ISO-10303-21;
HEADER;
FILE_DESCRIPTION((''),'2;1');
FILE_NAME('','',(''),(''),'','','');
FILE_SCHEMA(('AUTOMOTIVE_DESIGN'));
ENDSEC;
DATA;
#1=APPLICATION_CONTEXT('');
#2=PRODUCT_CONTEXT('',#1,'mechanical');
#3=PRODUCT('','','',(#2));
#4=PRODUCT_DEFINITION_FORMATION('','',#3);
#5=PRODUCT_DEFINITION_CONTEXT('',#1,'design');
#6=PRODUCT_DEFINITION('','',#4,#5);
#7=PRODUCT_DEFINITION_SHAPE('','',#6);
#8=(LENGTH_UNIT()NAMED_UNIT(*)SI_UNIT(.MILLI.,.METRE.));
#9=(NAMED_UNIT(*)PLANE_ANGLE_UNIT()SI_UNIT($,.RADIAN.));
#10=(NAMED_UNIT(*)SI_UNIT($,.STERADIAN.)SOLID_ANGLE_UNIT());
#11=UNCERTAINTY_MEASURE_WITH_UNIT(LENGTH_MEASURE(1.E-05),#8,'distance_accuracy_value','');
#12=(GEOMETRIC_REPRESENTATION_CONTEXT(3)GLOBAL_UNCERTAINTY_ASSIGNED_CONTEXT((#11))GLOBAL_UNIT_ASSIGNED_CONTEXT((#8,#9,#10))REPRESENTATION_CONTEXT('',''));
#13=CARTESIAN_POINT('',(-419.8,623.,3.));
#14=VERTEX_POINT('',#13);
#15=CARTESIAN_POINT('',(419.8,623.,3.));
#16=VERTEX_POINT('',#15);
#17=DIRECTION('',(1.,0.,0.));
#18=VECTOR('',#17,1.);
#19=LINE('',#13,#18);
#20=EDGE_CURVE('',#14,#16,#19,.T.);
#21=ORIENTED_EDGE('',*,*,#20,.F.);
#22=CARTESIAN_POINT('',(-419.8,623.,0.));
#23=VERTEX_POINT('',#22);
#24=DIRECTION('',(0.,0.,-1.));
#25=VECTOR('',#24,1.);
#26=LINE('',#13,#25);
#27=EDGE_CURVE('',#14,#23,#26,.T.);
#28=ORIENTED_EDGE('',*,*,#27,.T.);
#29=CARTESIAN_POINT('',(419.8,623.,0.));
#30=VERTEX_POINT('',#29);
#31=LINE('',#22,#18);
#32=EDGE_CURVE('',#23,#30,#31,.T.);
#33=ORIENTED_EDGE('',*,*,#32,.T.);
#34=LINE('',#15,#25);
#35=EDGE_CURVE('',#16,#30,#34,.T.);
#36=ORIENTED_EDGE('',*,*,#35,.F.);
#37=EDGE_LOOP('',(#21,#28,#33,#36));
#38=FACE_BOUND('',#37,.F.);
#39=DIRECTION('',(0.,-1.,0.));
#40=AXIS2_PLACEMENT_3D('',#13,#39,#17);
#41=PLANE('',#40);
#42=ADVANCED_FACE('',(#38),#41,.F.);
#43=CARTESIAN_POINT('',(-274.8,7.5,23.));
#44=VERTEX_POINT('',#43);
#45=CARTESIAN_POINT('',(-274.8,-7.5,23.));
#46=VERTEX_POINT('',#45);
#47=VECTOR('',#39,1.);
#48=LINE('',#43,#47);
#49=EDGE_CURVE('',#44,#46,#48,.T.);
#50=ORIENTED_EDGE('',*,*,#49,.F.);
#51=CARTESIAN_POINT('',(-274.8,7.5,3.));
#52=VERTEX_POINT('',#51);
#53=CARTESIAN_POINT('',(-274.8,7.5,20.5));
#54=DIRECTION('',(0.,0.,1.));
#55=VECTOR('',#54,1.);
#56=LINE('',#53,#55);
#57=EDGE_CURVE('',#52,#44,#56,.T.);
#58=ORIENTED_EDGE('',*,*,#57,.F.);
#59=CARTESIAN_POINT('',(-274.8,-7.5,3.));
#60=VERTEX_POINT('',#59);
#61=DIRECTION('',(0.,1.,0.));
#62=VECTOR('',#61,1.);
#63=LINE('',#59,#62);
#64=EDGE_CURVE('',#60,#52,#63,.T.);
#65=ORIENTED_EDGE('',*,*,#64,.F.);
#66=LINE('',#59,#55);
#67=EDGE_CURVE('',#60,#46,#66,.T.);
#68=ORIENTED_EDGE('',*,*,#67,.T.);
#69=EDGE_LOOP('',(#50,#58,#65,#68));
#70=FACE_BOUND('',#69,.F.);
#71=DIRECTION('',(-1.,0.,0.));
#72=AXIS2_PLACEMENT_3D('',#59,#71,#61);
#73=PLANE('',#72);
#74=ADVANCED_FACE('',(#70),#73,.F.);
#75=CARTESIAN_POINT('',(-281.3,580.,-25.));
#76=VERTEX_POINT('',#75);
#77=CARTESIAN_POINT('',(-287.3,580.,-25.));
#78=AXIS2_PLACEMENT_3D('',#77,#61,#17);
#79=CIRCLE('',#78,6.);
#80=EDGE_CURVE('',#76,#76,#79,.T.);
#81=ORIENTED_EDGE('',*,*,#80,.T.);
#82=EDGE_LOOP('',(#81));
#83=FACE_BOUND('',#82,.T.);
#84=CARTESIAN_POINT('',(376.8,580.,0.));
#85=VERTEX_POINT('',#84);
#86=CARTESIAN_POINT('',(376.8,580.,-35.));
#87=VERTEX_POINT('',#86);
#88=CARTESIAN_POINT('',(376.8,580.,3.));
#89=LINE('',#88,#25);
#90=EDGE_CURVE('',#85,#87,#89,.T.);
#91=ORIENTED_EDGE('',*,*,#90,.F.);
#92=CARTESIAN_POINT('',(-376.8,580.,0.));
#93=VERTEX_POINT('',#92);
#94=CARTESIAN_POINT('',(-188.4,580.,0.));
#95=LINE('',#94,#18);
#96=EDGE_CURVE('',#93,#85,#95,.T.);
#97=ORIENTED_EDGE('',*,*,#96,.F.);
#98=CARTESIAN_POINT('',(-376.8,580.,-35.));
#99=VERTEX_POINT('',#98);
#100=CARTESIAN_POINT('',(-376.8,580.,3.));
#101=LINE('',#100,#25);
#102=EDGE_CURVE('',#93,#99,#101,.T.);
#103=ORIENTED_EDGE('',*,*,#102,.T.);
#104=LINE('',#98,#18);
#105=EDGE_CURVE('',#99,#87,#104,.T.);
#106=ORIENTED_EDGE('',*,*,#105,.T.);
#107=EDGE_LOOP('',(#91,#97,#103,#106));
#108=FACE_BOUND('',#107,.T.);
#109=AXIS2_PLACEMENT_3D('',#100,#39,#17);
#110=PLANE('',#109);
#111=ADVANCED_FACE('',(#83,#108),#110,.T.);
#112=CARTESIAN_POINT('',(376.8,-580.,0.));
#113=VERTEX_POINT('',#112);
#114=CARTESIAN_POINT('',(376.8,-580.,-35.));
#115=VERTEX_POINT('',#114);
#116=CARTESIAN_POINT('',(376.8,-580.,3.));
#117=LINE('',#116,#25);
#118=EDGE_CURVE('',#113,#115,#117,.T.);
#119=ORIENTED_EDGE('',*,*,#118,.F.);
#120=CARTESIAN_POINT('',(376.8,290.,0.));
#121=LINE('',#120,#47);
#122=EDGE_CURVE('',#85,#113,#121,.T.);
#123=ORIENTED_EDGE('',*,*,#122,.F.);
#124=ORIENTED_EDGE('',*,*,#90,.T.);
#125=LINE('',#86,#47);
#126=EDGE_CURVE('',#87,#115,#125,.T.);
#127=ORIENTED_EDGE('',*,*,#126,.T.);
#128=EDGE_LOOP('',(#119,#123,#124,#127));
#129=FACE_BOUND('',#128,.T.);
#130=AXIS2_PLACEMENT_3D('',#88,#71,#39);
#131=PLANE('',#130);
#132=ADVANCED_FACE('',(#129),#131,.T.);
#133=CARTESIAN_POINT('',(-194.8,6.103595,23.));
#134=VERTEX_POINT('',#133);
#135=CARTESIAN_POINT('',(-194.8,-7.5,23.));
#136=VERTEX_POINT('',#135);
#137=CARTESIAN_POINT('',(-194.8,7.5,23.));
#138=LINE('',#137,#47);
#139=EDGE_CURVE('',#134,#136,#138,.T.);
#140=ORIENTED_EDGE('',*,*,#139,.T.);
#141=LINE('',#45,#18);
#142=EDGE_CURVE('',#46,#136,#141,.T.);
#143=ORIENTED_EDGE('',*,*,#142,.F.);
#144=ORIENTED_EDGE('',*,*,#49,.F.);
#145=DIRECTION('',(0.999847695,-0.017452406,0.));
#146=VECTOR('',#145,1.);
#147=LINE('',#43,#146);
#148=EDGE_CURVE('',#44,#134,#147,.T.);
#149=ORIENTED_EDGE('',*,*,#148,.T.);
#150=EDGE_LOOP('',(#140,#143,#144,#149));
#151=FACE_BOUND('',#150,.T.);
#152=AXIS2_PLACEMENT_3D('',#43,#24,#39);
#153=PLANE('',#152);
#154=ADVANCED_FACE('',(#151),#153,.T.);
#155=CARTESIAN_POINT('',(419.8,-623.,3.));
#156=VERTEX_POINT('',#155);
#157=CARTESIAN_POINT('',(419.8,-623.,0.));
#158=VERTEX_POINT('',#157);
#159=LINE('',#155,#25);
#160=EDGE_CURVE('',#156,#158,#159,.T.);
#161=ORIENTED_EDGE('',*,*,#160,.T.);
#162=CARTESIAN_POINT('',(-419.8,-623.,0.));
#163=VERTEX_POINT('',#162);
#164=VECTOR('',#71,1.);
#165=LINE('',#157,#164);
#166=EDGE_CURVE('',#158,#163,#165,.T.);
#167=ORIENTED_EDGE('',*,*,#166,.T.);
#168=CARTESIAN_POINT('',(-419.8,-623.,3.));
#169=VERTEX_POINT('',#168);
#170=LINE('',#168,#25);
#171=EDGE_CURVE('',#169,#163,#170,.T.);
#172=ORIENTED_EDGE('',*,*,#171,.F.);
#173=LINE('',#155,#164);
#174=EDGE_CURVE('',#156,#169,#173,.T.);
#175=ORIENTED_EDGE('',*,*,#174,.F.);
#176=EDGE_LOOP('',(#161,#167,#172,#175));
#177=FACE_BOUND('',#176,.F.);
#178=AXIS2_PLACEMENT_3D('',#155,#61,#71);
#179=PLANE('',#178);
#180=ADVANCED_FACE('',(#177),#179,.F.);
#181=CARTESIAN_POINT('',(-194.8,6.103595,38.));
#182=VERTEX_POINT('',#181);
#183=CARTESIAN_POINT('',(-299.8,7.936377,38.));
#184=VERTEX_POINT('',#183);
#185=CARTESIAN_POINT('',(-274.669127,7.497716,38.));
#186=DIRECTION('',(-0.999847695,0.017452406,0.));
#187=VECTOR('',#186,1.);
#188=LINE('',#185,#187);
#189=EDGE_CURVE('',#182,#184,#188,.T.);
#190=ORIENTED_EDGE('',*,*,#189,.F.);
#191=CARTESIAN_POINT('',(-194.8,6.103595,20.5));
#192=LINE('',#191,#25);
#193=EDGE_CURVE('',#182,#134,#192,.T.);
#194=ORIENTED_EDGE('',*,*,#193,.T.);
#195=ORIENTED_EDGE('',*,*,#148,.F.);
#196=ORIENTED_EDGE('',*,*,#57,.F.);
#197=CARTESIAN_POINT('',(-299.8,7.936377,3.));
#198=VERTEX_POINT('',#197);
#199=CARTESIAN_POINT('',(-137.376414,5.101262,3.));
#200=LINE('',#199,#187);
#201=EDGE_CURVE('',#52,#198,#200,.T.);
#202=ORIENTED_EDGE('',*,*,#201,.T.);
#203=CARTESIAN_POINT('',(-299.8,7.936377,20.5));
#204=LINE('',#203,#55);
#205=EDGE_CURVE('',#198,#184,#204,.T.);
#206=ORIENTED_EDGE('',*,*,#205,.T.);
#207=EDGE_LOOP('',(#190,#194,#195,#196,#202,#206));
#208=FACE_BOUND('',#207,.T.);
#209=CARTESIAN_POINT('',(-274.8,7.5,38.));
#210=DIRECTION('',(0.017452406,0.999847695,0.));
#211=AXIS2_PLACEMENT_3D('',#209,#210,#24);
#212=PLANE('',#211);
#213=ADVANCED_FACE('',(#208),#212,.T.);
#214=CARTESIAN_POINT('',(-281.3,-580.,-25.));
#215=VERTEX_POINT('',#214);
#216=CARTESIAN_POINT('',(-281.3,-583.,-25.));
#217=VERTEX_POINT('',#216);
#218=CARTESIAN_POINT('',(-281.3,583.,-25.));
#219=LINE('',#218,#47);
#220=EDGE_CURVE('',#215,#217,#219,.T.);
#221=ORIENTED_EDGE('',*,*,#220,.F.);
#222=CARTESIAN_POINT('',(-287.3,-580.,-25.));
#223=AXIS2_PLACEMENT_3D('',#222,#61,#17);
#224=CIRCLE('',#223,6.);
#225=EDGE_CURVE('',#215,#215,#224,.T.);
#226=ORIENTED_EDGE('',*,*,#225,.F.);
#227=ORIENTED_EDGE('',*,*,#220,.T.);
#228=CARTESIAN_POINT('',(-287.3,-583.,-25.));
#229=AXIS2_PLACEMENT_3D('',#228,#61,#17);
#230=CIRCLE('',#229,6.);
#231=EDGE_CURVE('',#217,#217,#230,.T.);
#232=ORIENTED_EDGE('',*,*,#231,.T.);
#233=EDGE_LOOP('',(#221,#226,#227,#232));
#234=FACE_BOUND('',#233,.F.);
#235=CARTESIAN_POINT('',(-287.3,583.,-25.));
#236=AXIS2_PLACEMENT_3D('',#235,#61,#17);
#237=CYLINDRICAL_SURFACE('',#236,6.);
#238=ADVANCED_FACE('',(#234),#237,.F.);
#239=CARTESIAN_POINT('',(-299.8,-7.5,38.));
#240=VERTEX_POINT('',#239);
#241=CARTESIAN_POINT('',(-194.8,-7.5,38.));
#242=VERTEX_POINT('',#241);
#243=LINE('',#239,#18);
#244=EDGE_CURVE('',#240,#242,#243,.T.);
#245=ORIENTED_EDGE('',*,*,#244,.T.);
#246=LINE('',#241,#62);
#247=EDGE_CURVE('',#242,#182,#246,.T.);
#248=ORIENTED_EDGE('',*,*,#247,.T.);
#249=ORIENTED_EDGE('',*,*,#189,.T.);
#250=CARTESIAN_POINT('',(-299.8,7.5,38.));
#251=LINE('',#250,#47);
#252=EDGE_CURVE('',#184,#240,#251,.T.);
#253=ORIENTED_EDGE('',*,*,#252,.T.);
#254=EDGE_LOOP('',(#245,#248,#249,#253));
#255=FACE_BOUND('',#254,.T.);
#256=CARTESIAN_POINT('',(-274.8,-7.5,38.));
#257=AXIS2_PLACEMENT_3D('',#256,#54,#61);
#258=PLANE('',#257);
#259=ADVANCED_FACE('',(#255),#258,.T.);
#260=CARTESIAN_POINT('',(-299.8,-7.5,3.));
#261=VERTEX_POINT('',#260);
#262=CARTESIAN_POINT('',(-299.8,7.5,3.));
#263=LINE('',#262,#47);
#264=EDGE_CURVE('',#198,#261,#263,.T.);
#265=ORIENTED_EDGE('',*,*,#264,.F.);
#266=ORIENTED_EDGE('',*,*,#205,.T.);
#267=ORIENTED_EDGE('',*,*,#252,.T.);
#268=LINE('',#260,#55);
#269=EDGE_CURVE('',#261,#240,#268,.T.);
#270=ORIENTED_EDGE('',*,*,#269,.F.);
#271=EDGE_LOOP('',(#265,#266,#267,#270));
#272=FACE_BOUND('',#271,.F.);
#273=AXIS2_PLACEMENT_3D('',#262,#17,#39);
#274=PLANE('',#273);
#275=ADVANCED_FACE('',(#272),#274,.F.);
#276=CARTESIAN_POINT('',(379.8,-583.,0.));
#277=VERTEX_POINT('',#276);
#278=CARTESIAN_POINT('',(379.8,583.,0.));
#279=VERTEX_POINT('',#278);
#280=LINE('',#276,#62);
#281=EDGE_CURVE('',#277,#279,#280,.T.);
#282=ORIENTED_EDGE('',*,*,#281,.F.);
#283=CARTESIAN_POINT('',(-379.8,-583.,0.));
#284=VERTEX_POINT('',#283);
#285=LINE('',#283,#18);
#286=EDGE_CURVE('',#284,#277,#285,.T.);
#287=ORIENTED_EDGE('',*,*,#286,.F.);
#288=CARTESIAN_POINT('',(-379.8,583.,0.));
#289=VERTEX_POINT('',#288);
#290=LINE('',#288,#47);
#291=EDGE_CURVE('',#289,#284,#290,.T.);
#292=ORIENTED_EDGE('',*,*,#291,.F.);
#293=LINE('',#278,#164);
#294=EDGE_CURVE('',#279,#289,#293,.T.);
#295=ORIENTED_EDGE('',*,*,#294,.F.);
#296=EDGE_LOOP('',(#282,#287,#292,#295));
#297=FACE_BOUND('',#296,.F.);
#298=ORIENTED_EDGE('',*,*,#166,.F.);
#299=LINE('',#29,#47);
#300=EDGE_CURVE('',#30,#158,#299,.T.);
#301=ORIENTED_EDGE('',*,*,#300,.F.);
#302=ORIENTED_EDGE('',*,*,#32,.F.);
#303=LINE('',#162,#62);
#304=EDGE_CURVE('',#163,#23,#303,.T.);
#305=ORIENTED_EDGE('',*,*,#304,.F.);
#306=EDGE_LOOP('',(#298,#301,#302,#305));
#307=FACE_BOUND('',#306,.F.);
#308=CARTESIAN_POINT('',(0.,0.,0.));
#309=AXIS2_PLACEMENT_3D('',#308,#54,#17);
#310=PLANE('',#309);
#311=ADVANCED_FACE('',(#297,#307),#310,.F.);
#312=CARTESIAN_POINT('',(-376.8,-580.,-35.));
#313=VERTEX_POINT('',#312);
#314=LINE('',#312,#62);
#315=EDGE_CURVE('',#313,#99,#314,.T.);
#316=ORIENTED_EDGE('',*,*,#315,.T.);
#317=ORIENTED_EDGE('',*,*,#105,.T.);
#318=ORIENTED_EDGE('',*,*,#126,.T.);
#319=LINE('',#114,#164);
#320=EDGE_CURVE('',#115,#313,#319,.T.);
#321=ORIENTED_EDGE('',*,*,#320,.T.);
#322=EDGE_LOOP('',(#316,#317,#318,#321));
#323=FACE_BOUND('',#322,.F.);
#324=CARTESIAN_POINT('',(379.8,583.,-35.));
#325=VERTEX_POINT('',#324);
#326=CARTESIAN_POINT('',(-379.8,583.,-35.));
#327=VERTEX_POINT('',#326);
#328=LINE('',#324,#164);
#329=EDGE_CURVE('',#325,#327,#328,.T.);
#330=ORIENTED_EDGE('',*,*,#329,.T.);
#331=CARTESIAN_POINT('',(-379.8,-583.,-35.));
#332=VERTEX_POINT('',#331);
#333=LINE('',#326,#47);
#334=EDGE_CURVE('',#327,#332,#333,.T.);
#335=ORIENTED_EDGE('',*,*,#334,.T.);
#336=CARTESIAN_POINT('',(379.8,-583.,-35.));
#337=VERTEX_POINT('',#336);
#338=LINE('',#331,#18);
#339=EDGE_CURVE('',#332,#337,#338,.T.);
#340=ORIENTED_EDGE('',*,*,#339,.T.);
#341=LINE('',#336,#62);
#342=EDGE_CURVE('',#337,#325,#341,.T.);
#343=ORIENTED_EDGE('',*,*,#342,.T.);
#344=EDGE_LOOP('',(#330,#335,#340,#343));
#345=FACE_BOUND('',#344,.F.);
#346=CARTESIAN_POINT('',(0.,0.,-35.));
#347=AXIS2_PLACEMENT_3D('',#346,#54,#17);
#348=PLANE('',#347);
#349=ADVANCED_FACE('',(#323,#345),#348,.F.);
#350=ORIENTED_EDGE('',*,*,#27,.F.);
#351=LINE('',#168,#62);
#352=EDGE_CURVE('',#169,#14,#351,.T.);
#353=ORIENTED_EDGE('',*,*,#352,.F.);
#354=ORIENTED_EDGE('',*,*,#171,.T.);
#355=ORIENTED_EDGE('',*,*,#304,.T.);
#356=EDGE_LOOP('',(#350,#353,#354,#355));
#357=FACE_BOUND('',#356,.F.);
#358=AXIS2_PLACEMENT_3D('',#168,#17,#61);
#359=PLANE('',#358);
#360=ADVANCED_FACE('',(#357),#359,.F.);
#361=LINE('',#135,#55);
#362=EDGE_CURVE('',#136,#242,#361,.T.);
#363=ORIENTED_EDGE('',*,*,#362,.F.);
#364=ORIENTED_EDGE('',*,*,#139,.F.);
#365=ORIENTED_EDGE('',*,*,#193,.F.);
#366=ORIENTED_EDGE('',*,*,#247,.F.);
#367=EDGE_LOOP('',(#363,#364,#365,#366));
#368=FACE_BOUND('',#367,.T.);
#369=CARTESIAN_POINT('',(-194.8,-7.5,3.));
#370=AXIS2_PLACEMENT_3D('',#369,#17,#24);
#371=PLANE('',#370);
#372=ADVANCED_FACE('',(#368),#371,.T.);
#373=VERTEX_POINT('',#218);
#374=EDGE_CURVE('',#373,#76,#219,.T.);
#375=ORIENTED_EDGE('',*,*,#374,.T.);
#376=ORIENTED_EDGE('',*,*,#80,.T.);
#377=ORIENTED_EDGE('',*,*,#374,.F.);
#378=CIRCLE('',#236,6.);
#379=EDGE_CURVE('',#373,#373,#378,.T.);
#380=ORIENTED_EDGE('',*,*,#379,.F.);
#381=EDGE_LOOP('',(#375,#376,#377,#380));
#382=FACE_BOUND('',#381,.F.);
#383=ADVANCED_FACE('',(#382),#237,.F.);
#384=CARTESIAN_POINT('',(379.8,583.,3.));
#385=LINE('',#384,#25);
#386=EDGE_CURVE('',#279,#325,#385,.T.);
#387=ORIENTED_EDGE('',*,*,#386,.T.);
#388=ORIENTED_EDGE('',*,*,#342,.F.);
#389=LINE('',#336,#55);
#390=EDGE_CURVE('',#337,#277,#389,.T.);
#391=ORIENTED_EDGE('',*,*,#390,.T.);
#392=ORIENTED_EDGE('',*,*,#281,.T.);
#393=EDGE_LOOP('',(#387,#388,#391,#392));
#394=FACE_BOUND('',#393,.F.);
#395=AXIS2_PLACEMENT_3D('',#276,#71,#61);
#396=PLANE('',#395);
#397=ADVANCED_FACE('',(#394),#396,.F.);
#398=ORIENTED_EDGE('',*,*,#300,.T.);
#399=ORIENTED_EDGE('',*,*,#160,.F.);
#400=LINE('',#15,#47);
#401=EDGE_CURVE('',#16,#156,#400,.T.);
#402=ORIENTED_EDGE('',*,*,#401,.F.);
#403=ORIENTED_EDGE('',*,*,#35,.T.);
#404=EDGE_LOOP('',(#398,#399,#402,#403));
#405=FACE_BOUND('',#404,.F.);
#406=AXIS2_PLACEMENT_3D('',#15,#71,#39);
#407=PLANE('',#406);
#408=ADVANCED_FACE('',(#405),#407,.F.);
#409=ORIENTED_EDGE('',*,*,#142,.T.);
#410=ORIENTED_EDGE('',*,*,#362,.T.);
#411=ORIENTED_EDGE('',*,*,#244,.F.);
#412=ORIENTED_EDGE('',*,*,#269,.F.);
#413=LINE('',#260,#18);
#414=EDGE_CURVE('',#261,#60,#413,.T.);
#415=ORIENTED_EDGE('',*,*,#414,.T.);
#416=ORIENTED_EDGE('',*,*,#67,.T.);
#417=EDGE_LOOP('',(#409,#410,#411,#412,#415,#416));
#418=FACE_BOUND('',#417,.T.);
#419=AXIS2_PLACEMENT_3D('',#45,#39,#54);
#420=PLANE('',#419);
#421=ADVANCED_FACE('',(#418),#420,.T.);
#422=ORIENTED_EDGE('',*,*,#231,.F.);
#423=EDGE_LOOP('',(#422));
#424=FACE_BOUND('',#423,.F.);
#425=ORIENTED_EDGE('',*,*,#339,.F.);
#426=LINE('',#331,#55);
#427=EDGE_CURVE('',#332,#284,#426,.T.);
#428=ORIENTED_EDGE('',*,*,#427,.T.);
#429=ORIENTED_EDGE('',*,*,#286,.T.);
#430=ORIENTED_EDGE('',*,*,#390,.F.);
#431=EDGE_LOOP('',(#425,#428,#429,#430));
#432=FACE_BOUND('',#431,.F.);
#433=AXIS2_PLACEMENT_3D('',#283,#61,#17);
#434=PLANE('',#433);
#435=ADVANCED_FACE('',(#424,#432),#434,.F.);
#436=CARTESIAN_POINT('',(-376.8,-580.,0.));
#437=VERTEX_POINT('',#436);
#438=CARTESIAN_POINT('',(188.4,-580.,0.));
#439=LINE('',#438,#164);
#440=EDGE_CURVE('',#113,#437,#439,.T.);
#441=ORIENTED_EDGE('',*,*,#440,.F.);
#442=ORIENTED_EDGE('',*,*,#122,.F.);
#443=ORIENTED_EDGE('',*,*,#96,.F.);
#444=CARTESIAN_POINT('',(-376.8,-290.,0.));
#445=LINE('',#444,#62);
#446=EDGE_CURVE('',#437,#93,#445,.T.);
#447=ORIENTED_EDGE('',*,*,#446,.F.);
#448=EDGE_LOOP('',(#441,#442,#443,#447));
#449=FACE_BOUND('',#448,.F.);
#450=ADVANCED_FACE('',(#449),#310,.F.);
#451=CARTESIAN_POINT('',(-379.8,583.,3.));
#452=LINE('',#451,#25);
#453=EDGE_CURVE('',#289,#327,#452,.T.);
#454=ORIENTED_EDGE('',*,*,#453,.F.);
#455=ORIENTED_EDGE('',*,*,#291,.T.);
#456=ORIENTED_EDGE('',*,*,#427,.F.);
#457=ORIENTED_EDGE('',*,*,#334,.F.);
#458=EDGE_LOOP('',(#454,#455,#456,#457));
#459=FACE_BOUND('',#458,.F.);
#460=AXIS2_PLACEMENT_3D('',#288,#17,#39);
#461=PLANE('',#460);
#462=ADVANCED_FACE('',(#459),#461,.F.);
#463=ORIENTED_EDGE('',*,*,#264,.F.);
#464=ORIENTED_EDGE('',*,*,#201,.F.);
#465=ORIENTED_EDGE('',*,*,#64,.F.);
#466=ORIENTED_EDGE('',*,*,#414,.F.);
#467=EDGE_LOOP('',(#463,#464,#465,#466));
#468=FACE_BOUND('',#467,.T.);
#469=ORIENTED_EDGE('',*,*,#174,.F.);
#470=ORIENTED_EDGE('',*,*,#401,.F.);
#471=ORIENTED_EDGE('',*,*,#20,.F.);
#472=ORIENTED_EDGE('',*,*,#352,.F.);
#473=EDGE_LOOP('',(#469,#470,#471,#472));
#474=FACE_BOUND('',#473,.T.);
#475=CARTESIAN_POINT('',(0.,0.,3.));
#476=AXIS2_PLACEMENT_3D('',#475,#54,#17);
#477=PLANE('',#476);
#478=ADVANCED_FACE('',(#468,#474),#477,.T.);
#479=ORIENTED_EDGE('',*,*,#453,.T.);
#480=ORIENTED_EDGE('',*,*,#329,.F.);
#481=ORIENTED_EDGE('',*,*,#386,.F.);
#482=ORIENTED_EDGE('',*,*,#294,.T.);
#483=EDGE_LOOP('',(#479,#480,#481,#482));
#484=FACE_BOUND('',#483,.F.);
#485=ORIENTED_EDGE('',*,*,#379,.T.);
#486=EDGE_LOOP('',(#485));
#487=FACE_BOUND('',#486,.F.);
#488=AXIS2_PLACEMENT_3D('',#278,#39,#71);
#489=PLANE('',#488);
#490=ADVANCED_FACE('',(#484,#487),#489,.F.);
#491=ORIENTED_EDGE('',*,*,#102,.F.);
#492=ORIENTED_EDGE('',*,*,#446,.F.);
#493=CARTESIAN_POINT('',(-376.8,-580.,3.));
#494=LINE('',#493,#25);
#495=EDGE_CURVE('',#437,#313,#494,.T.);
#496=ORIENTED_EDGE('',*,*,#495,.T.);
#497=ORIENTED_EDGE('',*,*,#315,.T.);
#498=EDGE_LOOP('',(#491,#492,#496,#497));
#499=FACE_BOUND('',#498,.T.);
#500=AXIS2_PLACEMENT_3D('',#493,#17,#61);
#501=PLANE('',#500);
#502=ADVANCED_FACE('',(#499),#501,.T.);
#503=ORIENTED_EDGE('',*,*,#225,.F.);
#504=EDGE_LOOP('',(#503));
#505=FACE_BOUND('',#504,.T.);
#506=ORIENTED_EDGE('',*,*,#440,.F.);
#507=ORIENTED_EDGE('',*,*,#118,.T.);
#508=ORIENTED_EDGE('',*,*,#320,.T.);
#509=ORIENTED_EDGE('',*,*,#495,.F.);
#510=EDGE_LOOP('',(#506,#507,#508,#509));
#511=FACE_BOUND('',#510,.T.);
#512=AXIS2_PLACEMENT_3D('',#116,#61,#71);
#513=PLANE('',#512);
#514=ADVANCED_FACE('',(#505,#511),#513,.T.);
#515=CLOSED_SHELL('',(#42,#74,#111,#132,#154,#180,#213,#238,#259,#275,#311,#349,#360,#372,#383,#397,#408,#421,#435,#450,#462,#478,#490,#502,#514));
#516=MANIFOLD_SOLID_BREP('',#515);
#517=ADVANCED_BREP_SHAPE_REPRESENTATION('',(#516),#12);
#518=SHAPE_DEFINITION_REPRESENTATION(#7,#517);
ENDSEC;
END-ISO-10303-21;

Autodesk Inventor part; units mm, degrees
ref_plane "YZ Plane" through (0, 0, 0) normal (1, 0, 0) x (0, 1, 0)
ref_plane "XZ Plane" through (0, 0, 0) normal (0, 1, 0) x (-1, 0, 0)
ref_plane "XY Plane" through (0, 0, 0) normal (0, 0, 1) x (1, 0, 0)
sketch "Sketch1" plane through (0, 0, 0) normal (0, 0, 1) x (1, 0, 0)
  line L0 (-379.8, -583) -> (379.8, -583)
  line L1 (379.8, -583) -> (379.8, 583)
  line L2 (379.8, 583) -> (-379.8, 583)
  line L3 (-379.8, 583) -> (-379.8, -583)
  line L4 (-379.8, -583) -> (379.8, 583) construction
  line L5 (379.8, -583) -> (-379.8, 583) construction
  point P0 (0, 0)
  dimension "d0" = 759.6
  dimension "d1" = 1166
extrude "Extrusion1" add sketch "Sketch1" along normal blind 3
sketch "Sketch2" plane through (0, 0, 3) normal (0, 0, 1) x (1, 0, 0)
  line L0 (379.8, 583) -> (-379.8, 583) projected
  line L1 (379.8, -583) -> (379.8, 583) projected
  line L2 (-379.8, -583) -> (379.8, -583) projected
  line L3 (-379.8, 583) -> (-379.8, -583) projected
  line L4 (-376.8, 580) -> (376.8, 580)
  line L5 (376.8, 580) -> (376.8, -580)
  line L6 (376.8, -580) -> (-376.8, -580)
  line L7 (-376.8, -580) -> (-376.8, 580)
  point P0 (0, 0)
  dimension "d4" = 3
extrude "Extrusion2" add sketch "Sketch2" against normal blind 38
sketch "Sketch3" plane through (0, 0, 3) normal (0, 0, 1) x (1, 0, 0)
  line L0 (-299.8, -7.5) -> (-274.8, -7.5)
  line L1 (-274.8, -7.5) -> (-274.8, 7.5)
  line L2 (-274.8, 7.5) -> (-299.8, 7.5)
  line L3 (-299.8, 7.5) -> (-299.8, -7.5)
  line L4 (-299.8, -7.5) -> (-274.8, 7.5) construction
  line L5 (-274.8, -7.5) -> (-299.8, 7.5) construction
  line L6 (-379.8, 583) -> (-379.8, -583) projected
  point P0 (0, 0)
  point P1 (-287.3, 0)
  dimension "d7" = 25
  dimension "d8" = 15
  dimension "d9" = 80
extrude "Extrusion3" add sketch "Sketch3" along normal blind 35
sketch "Sketch4" plane through (-274.8, -7.5, 3) normal (1, 0, 0) x (0, 0, -1)
  line L0 (-35, 0) -> (-35, 15) projected
  line L1 (-35, 15) -> (-20, 15)
  line L2 (-20, 15) -> (-20, 0)
  line L3 (-20, 0) -> (-35, 0)
  line L4 (-35, 0) -> (-35, 15)
  point P0 (3, 7.5)
  dimension "d12" = 15
  dimension "d13" = 15
extrude "Extrusion4" add sketch "Sketch4" along normal blind 80
draft "FaceDraft2" angle 1 pull direction (1, 0, 0) faces at (-256.4667, 7.5, 33) fixed edges at (-274.8, 7.5, 13)
sketch "Sketch5" plane through (-379.8, 583, 3) normal (0, 1, 0) x (1, 0, 0)
  line L0 (80, 0) -> (80, -35) construction
  line L1 (105, 0) -> (105, -20) construction
  line L2 (80, 0) -> (105, 0) construction
  line L3 (759.6, 0) -> (0, 0) projected
  line L4 (92.5, 0) -> (92.5, 56) construction
  circle A0 centre (92.5, 28) radius 6
  line L5 (0, 38) -> (759.6, 38) projected
  point P0 (379.8, 3)
  dimension "d18" = 12.5
  dimension "d19" = 12
  dimension "d20" = 10
extrude "Extrusion5" cut sketch "Sketch5" against normal through all
sketch "Sketch7" plane through (0, 0, 3) normal (0, 0, 1) x (1, 0, 0)
  line L0 (379.8, 583) -> (-379.8, 583) projected
  line L1 (-379.8, 583) -> (-379.8, -583) projected
  line L2 (379.8, -583) -> (379.8, 583) projected
  line L3 (-379.8, -583) -> (379.8, -583) projected
  line L4 (-419.8, 623) -> (419.8, 623)
  line L5 (419.8, 623) -> (419.8, -623)
  line L6 (419.8, -623) -> (-419.8, -623)
  line L7 (-419.8, -623) -> (-419.8, 623)
  point P0 (0, 0)
  dimension "d26" = 40
extrude "Extrusion7" add sketch "Sketch7" against normal blind 3
properties part number "EnclosureDoor" material "Steel, Galvanized"
